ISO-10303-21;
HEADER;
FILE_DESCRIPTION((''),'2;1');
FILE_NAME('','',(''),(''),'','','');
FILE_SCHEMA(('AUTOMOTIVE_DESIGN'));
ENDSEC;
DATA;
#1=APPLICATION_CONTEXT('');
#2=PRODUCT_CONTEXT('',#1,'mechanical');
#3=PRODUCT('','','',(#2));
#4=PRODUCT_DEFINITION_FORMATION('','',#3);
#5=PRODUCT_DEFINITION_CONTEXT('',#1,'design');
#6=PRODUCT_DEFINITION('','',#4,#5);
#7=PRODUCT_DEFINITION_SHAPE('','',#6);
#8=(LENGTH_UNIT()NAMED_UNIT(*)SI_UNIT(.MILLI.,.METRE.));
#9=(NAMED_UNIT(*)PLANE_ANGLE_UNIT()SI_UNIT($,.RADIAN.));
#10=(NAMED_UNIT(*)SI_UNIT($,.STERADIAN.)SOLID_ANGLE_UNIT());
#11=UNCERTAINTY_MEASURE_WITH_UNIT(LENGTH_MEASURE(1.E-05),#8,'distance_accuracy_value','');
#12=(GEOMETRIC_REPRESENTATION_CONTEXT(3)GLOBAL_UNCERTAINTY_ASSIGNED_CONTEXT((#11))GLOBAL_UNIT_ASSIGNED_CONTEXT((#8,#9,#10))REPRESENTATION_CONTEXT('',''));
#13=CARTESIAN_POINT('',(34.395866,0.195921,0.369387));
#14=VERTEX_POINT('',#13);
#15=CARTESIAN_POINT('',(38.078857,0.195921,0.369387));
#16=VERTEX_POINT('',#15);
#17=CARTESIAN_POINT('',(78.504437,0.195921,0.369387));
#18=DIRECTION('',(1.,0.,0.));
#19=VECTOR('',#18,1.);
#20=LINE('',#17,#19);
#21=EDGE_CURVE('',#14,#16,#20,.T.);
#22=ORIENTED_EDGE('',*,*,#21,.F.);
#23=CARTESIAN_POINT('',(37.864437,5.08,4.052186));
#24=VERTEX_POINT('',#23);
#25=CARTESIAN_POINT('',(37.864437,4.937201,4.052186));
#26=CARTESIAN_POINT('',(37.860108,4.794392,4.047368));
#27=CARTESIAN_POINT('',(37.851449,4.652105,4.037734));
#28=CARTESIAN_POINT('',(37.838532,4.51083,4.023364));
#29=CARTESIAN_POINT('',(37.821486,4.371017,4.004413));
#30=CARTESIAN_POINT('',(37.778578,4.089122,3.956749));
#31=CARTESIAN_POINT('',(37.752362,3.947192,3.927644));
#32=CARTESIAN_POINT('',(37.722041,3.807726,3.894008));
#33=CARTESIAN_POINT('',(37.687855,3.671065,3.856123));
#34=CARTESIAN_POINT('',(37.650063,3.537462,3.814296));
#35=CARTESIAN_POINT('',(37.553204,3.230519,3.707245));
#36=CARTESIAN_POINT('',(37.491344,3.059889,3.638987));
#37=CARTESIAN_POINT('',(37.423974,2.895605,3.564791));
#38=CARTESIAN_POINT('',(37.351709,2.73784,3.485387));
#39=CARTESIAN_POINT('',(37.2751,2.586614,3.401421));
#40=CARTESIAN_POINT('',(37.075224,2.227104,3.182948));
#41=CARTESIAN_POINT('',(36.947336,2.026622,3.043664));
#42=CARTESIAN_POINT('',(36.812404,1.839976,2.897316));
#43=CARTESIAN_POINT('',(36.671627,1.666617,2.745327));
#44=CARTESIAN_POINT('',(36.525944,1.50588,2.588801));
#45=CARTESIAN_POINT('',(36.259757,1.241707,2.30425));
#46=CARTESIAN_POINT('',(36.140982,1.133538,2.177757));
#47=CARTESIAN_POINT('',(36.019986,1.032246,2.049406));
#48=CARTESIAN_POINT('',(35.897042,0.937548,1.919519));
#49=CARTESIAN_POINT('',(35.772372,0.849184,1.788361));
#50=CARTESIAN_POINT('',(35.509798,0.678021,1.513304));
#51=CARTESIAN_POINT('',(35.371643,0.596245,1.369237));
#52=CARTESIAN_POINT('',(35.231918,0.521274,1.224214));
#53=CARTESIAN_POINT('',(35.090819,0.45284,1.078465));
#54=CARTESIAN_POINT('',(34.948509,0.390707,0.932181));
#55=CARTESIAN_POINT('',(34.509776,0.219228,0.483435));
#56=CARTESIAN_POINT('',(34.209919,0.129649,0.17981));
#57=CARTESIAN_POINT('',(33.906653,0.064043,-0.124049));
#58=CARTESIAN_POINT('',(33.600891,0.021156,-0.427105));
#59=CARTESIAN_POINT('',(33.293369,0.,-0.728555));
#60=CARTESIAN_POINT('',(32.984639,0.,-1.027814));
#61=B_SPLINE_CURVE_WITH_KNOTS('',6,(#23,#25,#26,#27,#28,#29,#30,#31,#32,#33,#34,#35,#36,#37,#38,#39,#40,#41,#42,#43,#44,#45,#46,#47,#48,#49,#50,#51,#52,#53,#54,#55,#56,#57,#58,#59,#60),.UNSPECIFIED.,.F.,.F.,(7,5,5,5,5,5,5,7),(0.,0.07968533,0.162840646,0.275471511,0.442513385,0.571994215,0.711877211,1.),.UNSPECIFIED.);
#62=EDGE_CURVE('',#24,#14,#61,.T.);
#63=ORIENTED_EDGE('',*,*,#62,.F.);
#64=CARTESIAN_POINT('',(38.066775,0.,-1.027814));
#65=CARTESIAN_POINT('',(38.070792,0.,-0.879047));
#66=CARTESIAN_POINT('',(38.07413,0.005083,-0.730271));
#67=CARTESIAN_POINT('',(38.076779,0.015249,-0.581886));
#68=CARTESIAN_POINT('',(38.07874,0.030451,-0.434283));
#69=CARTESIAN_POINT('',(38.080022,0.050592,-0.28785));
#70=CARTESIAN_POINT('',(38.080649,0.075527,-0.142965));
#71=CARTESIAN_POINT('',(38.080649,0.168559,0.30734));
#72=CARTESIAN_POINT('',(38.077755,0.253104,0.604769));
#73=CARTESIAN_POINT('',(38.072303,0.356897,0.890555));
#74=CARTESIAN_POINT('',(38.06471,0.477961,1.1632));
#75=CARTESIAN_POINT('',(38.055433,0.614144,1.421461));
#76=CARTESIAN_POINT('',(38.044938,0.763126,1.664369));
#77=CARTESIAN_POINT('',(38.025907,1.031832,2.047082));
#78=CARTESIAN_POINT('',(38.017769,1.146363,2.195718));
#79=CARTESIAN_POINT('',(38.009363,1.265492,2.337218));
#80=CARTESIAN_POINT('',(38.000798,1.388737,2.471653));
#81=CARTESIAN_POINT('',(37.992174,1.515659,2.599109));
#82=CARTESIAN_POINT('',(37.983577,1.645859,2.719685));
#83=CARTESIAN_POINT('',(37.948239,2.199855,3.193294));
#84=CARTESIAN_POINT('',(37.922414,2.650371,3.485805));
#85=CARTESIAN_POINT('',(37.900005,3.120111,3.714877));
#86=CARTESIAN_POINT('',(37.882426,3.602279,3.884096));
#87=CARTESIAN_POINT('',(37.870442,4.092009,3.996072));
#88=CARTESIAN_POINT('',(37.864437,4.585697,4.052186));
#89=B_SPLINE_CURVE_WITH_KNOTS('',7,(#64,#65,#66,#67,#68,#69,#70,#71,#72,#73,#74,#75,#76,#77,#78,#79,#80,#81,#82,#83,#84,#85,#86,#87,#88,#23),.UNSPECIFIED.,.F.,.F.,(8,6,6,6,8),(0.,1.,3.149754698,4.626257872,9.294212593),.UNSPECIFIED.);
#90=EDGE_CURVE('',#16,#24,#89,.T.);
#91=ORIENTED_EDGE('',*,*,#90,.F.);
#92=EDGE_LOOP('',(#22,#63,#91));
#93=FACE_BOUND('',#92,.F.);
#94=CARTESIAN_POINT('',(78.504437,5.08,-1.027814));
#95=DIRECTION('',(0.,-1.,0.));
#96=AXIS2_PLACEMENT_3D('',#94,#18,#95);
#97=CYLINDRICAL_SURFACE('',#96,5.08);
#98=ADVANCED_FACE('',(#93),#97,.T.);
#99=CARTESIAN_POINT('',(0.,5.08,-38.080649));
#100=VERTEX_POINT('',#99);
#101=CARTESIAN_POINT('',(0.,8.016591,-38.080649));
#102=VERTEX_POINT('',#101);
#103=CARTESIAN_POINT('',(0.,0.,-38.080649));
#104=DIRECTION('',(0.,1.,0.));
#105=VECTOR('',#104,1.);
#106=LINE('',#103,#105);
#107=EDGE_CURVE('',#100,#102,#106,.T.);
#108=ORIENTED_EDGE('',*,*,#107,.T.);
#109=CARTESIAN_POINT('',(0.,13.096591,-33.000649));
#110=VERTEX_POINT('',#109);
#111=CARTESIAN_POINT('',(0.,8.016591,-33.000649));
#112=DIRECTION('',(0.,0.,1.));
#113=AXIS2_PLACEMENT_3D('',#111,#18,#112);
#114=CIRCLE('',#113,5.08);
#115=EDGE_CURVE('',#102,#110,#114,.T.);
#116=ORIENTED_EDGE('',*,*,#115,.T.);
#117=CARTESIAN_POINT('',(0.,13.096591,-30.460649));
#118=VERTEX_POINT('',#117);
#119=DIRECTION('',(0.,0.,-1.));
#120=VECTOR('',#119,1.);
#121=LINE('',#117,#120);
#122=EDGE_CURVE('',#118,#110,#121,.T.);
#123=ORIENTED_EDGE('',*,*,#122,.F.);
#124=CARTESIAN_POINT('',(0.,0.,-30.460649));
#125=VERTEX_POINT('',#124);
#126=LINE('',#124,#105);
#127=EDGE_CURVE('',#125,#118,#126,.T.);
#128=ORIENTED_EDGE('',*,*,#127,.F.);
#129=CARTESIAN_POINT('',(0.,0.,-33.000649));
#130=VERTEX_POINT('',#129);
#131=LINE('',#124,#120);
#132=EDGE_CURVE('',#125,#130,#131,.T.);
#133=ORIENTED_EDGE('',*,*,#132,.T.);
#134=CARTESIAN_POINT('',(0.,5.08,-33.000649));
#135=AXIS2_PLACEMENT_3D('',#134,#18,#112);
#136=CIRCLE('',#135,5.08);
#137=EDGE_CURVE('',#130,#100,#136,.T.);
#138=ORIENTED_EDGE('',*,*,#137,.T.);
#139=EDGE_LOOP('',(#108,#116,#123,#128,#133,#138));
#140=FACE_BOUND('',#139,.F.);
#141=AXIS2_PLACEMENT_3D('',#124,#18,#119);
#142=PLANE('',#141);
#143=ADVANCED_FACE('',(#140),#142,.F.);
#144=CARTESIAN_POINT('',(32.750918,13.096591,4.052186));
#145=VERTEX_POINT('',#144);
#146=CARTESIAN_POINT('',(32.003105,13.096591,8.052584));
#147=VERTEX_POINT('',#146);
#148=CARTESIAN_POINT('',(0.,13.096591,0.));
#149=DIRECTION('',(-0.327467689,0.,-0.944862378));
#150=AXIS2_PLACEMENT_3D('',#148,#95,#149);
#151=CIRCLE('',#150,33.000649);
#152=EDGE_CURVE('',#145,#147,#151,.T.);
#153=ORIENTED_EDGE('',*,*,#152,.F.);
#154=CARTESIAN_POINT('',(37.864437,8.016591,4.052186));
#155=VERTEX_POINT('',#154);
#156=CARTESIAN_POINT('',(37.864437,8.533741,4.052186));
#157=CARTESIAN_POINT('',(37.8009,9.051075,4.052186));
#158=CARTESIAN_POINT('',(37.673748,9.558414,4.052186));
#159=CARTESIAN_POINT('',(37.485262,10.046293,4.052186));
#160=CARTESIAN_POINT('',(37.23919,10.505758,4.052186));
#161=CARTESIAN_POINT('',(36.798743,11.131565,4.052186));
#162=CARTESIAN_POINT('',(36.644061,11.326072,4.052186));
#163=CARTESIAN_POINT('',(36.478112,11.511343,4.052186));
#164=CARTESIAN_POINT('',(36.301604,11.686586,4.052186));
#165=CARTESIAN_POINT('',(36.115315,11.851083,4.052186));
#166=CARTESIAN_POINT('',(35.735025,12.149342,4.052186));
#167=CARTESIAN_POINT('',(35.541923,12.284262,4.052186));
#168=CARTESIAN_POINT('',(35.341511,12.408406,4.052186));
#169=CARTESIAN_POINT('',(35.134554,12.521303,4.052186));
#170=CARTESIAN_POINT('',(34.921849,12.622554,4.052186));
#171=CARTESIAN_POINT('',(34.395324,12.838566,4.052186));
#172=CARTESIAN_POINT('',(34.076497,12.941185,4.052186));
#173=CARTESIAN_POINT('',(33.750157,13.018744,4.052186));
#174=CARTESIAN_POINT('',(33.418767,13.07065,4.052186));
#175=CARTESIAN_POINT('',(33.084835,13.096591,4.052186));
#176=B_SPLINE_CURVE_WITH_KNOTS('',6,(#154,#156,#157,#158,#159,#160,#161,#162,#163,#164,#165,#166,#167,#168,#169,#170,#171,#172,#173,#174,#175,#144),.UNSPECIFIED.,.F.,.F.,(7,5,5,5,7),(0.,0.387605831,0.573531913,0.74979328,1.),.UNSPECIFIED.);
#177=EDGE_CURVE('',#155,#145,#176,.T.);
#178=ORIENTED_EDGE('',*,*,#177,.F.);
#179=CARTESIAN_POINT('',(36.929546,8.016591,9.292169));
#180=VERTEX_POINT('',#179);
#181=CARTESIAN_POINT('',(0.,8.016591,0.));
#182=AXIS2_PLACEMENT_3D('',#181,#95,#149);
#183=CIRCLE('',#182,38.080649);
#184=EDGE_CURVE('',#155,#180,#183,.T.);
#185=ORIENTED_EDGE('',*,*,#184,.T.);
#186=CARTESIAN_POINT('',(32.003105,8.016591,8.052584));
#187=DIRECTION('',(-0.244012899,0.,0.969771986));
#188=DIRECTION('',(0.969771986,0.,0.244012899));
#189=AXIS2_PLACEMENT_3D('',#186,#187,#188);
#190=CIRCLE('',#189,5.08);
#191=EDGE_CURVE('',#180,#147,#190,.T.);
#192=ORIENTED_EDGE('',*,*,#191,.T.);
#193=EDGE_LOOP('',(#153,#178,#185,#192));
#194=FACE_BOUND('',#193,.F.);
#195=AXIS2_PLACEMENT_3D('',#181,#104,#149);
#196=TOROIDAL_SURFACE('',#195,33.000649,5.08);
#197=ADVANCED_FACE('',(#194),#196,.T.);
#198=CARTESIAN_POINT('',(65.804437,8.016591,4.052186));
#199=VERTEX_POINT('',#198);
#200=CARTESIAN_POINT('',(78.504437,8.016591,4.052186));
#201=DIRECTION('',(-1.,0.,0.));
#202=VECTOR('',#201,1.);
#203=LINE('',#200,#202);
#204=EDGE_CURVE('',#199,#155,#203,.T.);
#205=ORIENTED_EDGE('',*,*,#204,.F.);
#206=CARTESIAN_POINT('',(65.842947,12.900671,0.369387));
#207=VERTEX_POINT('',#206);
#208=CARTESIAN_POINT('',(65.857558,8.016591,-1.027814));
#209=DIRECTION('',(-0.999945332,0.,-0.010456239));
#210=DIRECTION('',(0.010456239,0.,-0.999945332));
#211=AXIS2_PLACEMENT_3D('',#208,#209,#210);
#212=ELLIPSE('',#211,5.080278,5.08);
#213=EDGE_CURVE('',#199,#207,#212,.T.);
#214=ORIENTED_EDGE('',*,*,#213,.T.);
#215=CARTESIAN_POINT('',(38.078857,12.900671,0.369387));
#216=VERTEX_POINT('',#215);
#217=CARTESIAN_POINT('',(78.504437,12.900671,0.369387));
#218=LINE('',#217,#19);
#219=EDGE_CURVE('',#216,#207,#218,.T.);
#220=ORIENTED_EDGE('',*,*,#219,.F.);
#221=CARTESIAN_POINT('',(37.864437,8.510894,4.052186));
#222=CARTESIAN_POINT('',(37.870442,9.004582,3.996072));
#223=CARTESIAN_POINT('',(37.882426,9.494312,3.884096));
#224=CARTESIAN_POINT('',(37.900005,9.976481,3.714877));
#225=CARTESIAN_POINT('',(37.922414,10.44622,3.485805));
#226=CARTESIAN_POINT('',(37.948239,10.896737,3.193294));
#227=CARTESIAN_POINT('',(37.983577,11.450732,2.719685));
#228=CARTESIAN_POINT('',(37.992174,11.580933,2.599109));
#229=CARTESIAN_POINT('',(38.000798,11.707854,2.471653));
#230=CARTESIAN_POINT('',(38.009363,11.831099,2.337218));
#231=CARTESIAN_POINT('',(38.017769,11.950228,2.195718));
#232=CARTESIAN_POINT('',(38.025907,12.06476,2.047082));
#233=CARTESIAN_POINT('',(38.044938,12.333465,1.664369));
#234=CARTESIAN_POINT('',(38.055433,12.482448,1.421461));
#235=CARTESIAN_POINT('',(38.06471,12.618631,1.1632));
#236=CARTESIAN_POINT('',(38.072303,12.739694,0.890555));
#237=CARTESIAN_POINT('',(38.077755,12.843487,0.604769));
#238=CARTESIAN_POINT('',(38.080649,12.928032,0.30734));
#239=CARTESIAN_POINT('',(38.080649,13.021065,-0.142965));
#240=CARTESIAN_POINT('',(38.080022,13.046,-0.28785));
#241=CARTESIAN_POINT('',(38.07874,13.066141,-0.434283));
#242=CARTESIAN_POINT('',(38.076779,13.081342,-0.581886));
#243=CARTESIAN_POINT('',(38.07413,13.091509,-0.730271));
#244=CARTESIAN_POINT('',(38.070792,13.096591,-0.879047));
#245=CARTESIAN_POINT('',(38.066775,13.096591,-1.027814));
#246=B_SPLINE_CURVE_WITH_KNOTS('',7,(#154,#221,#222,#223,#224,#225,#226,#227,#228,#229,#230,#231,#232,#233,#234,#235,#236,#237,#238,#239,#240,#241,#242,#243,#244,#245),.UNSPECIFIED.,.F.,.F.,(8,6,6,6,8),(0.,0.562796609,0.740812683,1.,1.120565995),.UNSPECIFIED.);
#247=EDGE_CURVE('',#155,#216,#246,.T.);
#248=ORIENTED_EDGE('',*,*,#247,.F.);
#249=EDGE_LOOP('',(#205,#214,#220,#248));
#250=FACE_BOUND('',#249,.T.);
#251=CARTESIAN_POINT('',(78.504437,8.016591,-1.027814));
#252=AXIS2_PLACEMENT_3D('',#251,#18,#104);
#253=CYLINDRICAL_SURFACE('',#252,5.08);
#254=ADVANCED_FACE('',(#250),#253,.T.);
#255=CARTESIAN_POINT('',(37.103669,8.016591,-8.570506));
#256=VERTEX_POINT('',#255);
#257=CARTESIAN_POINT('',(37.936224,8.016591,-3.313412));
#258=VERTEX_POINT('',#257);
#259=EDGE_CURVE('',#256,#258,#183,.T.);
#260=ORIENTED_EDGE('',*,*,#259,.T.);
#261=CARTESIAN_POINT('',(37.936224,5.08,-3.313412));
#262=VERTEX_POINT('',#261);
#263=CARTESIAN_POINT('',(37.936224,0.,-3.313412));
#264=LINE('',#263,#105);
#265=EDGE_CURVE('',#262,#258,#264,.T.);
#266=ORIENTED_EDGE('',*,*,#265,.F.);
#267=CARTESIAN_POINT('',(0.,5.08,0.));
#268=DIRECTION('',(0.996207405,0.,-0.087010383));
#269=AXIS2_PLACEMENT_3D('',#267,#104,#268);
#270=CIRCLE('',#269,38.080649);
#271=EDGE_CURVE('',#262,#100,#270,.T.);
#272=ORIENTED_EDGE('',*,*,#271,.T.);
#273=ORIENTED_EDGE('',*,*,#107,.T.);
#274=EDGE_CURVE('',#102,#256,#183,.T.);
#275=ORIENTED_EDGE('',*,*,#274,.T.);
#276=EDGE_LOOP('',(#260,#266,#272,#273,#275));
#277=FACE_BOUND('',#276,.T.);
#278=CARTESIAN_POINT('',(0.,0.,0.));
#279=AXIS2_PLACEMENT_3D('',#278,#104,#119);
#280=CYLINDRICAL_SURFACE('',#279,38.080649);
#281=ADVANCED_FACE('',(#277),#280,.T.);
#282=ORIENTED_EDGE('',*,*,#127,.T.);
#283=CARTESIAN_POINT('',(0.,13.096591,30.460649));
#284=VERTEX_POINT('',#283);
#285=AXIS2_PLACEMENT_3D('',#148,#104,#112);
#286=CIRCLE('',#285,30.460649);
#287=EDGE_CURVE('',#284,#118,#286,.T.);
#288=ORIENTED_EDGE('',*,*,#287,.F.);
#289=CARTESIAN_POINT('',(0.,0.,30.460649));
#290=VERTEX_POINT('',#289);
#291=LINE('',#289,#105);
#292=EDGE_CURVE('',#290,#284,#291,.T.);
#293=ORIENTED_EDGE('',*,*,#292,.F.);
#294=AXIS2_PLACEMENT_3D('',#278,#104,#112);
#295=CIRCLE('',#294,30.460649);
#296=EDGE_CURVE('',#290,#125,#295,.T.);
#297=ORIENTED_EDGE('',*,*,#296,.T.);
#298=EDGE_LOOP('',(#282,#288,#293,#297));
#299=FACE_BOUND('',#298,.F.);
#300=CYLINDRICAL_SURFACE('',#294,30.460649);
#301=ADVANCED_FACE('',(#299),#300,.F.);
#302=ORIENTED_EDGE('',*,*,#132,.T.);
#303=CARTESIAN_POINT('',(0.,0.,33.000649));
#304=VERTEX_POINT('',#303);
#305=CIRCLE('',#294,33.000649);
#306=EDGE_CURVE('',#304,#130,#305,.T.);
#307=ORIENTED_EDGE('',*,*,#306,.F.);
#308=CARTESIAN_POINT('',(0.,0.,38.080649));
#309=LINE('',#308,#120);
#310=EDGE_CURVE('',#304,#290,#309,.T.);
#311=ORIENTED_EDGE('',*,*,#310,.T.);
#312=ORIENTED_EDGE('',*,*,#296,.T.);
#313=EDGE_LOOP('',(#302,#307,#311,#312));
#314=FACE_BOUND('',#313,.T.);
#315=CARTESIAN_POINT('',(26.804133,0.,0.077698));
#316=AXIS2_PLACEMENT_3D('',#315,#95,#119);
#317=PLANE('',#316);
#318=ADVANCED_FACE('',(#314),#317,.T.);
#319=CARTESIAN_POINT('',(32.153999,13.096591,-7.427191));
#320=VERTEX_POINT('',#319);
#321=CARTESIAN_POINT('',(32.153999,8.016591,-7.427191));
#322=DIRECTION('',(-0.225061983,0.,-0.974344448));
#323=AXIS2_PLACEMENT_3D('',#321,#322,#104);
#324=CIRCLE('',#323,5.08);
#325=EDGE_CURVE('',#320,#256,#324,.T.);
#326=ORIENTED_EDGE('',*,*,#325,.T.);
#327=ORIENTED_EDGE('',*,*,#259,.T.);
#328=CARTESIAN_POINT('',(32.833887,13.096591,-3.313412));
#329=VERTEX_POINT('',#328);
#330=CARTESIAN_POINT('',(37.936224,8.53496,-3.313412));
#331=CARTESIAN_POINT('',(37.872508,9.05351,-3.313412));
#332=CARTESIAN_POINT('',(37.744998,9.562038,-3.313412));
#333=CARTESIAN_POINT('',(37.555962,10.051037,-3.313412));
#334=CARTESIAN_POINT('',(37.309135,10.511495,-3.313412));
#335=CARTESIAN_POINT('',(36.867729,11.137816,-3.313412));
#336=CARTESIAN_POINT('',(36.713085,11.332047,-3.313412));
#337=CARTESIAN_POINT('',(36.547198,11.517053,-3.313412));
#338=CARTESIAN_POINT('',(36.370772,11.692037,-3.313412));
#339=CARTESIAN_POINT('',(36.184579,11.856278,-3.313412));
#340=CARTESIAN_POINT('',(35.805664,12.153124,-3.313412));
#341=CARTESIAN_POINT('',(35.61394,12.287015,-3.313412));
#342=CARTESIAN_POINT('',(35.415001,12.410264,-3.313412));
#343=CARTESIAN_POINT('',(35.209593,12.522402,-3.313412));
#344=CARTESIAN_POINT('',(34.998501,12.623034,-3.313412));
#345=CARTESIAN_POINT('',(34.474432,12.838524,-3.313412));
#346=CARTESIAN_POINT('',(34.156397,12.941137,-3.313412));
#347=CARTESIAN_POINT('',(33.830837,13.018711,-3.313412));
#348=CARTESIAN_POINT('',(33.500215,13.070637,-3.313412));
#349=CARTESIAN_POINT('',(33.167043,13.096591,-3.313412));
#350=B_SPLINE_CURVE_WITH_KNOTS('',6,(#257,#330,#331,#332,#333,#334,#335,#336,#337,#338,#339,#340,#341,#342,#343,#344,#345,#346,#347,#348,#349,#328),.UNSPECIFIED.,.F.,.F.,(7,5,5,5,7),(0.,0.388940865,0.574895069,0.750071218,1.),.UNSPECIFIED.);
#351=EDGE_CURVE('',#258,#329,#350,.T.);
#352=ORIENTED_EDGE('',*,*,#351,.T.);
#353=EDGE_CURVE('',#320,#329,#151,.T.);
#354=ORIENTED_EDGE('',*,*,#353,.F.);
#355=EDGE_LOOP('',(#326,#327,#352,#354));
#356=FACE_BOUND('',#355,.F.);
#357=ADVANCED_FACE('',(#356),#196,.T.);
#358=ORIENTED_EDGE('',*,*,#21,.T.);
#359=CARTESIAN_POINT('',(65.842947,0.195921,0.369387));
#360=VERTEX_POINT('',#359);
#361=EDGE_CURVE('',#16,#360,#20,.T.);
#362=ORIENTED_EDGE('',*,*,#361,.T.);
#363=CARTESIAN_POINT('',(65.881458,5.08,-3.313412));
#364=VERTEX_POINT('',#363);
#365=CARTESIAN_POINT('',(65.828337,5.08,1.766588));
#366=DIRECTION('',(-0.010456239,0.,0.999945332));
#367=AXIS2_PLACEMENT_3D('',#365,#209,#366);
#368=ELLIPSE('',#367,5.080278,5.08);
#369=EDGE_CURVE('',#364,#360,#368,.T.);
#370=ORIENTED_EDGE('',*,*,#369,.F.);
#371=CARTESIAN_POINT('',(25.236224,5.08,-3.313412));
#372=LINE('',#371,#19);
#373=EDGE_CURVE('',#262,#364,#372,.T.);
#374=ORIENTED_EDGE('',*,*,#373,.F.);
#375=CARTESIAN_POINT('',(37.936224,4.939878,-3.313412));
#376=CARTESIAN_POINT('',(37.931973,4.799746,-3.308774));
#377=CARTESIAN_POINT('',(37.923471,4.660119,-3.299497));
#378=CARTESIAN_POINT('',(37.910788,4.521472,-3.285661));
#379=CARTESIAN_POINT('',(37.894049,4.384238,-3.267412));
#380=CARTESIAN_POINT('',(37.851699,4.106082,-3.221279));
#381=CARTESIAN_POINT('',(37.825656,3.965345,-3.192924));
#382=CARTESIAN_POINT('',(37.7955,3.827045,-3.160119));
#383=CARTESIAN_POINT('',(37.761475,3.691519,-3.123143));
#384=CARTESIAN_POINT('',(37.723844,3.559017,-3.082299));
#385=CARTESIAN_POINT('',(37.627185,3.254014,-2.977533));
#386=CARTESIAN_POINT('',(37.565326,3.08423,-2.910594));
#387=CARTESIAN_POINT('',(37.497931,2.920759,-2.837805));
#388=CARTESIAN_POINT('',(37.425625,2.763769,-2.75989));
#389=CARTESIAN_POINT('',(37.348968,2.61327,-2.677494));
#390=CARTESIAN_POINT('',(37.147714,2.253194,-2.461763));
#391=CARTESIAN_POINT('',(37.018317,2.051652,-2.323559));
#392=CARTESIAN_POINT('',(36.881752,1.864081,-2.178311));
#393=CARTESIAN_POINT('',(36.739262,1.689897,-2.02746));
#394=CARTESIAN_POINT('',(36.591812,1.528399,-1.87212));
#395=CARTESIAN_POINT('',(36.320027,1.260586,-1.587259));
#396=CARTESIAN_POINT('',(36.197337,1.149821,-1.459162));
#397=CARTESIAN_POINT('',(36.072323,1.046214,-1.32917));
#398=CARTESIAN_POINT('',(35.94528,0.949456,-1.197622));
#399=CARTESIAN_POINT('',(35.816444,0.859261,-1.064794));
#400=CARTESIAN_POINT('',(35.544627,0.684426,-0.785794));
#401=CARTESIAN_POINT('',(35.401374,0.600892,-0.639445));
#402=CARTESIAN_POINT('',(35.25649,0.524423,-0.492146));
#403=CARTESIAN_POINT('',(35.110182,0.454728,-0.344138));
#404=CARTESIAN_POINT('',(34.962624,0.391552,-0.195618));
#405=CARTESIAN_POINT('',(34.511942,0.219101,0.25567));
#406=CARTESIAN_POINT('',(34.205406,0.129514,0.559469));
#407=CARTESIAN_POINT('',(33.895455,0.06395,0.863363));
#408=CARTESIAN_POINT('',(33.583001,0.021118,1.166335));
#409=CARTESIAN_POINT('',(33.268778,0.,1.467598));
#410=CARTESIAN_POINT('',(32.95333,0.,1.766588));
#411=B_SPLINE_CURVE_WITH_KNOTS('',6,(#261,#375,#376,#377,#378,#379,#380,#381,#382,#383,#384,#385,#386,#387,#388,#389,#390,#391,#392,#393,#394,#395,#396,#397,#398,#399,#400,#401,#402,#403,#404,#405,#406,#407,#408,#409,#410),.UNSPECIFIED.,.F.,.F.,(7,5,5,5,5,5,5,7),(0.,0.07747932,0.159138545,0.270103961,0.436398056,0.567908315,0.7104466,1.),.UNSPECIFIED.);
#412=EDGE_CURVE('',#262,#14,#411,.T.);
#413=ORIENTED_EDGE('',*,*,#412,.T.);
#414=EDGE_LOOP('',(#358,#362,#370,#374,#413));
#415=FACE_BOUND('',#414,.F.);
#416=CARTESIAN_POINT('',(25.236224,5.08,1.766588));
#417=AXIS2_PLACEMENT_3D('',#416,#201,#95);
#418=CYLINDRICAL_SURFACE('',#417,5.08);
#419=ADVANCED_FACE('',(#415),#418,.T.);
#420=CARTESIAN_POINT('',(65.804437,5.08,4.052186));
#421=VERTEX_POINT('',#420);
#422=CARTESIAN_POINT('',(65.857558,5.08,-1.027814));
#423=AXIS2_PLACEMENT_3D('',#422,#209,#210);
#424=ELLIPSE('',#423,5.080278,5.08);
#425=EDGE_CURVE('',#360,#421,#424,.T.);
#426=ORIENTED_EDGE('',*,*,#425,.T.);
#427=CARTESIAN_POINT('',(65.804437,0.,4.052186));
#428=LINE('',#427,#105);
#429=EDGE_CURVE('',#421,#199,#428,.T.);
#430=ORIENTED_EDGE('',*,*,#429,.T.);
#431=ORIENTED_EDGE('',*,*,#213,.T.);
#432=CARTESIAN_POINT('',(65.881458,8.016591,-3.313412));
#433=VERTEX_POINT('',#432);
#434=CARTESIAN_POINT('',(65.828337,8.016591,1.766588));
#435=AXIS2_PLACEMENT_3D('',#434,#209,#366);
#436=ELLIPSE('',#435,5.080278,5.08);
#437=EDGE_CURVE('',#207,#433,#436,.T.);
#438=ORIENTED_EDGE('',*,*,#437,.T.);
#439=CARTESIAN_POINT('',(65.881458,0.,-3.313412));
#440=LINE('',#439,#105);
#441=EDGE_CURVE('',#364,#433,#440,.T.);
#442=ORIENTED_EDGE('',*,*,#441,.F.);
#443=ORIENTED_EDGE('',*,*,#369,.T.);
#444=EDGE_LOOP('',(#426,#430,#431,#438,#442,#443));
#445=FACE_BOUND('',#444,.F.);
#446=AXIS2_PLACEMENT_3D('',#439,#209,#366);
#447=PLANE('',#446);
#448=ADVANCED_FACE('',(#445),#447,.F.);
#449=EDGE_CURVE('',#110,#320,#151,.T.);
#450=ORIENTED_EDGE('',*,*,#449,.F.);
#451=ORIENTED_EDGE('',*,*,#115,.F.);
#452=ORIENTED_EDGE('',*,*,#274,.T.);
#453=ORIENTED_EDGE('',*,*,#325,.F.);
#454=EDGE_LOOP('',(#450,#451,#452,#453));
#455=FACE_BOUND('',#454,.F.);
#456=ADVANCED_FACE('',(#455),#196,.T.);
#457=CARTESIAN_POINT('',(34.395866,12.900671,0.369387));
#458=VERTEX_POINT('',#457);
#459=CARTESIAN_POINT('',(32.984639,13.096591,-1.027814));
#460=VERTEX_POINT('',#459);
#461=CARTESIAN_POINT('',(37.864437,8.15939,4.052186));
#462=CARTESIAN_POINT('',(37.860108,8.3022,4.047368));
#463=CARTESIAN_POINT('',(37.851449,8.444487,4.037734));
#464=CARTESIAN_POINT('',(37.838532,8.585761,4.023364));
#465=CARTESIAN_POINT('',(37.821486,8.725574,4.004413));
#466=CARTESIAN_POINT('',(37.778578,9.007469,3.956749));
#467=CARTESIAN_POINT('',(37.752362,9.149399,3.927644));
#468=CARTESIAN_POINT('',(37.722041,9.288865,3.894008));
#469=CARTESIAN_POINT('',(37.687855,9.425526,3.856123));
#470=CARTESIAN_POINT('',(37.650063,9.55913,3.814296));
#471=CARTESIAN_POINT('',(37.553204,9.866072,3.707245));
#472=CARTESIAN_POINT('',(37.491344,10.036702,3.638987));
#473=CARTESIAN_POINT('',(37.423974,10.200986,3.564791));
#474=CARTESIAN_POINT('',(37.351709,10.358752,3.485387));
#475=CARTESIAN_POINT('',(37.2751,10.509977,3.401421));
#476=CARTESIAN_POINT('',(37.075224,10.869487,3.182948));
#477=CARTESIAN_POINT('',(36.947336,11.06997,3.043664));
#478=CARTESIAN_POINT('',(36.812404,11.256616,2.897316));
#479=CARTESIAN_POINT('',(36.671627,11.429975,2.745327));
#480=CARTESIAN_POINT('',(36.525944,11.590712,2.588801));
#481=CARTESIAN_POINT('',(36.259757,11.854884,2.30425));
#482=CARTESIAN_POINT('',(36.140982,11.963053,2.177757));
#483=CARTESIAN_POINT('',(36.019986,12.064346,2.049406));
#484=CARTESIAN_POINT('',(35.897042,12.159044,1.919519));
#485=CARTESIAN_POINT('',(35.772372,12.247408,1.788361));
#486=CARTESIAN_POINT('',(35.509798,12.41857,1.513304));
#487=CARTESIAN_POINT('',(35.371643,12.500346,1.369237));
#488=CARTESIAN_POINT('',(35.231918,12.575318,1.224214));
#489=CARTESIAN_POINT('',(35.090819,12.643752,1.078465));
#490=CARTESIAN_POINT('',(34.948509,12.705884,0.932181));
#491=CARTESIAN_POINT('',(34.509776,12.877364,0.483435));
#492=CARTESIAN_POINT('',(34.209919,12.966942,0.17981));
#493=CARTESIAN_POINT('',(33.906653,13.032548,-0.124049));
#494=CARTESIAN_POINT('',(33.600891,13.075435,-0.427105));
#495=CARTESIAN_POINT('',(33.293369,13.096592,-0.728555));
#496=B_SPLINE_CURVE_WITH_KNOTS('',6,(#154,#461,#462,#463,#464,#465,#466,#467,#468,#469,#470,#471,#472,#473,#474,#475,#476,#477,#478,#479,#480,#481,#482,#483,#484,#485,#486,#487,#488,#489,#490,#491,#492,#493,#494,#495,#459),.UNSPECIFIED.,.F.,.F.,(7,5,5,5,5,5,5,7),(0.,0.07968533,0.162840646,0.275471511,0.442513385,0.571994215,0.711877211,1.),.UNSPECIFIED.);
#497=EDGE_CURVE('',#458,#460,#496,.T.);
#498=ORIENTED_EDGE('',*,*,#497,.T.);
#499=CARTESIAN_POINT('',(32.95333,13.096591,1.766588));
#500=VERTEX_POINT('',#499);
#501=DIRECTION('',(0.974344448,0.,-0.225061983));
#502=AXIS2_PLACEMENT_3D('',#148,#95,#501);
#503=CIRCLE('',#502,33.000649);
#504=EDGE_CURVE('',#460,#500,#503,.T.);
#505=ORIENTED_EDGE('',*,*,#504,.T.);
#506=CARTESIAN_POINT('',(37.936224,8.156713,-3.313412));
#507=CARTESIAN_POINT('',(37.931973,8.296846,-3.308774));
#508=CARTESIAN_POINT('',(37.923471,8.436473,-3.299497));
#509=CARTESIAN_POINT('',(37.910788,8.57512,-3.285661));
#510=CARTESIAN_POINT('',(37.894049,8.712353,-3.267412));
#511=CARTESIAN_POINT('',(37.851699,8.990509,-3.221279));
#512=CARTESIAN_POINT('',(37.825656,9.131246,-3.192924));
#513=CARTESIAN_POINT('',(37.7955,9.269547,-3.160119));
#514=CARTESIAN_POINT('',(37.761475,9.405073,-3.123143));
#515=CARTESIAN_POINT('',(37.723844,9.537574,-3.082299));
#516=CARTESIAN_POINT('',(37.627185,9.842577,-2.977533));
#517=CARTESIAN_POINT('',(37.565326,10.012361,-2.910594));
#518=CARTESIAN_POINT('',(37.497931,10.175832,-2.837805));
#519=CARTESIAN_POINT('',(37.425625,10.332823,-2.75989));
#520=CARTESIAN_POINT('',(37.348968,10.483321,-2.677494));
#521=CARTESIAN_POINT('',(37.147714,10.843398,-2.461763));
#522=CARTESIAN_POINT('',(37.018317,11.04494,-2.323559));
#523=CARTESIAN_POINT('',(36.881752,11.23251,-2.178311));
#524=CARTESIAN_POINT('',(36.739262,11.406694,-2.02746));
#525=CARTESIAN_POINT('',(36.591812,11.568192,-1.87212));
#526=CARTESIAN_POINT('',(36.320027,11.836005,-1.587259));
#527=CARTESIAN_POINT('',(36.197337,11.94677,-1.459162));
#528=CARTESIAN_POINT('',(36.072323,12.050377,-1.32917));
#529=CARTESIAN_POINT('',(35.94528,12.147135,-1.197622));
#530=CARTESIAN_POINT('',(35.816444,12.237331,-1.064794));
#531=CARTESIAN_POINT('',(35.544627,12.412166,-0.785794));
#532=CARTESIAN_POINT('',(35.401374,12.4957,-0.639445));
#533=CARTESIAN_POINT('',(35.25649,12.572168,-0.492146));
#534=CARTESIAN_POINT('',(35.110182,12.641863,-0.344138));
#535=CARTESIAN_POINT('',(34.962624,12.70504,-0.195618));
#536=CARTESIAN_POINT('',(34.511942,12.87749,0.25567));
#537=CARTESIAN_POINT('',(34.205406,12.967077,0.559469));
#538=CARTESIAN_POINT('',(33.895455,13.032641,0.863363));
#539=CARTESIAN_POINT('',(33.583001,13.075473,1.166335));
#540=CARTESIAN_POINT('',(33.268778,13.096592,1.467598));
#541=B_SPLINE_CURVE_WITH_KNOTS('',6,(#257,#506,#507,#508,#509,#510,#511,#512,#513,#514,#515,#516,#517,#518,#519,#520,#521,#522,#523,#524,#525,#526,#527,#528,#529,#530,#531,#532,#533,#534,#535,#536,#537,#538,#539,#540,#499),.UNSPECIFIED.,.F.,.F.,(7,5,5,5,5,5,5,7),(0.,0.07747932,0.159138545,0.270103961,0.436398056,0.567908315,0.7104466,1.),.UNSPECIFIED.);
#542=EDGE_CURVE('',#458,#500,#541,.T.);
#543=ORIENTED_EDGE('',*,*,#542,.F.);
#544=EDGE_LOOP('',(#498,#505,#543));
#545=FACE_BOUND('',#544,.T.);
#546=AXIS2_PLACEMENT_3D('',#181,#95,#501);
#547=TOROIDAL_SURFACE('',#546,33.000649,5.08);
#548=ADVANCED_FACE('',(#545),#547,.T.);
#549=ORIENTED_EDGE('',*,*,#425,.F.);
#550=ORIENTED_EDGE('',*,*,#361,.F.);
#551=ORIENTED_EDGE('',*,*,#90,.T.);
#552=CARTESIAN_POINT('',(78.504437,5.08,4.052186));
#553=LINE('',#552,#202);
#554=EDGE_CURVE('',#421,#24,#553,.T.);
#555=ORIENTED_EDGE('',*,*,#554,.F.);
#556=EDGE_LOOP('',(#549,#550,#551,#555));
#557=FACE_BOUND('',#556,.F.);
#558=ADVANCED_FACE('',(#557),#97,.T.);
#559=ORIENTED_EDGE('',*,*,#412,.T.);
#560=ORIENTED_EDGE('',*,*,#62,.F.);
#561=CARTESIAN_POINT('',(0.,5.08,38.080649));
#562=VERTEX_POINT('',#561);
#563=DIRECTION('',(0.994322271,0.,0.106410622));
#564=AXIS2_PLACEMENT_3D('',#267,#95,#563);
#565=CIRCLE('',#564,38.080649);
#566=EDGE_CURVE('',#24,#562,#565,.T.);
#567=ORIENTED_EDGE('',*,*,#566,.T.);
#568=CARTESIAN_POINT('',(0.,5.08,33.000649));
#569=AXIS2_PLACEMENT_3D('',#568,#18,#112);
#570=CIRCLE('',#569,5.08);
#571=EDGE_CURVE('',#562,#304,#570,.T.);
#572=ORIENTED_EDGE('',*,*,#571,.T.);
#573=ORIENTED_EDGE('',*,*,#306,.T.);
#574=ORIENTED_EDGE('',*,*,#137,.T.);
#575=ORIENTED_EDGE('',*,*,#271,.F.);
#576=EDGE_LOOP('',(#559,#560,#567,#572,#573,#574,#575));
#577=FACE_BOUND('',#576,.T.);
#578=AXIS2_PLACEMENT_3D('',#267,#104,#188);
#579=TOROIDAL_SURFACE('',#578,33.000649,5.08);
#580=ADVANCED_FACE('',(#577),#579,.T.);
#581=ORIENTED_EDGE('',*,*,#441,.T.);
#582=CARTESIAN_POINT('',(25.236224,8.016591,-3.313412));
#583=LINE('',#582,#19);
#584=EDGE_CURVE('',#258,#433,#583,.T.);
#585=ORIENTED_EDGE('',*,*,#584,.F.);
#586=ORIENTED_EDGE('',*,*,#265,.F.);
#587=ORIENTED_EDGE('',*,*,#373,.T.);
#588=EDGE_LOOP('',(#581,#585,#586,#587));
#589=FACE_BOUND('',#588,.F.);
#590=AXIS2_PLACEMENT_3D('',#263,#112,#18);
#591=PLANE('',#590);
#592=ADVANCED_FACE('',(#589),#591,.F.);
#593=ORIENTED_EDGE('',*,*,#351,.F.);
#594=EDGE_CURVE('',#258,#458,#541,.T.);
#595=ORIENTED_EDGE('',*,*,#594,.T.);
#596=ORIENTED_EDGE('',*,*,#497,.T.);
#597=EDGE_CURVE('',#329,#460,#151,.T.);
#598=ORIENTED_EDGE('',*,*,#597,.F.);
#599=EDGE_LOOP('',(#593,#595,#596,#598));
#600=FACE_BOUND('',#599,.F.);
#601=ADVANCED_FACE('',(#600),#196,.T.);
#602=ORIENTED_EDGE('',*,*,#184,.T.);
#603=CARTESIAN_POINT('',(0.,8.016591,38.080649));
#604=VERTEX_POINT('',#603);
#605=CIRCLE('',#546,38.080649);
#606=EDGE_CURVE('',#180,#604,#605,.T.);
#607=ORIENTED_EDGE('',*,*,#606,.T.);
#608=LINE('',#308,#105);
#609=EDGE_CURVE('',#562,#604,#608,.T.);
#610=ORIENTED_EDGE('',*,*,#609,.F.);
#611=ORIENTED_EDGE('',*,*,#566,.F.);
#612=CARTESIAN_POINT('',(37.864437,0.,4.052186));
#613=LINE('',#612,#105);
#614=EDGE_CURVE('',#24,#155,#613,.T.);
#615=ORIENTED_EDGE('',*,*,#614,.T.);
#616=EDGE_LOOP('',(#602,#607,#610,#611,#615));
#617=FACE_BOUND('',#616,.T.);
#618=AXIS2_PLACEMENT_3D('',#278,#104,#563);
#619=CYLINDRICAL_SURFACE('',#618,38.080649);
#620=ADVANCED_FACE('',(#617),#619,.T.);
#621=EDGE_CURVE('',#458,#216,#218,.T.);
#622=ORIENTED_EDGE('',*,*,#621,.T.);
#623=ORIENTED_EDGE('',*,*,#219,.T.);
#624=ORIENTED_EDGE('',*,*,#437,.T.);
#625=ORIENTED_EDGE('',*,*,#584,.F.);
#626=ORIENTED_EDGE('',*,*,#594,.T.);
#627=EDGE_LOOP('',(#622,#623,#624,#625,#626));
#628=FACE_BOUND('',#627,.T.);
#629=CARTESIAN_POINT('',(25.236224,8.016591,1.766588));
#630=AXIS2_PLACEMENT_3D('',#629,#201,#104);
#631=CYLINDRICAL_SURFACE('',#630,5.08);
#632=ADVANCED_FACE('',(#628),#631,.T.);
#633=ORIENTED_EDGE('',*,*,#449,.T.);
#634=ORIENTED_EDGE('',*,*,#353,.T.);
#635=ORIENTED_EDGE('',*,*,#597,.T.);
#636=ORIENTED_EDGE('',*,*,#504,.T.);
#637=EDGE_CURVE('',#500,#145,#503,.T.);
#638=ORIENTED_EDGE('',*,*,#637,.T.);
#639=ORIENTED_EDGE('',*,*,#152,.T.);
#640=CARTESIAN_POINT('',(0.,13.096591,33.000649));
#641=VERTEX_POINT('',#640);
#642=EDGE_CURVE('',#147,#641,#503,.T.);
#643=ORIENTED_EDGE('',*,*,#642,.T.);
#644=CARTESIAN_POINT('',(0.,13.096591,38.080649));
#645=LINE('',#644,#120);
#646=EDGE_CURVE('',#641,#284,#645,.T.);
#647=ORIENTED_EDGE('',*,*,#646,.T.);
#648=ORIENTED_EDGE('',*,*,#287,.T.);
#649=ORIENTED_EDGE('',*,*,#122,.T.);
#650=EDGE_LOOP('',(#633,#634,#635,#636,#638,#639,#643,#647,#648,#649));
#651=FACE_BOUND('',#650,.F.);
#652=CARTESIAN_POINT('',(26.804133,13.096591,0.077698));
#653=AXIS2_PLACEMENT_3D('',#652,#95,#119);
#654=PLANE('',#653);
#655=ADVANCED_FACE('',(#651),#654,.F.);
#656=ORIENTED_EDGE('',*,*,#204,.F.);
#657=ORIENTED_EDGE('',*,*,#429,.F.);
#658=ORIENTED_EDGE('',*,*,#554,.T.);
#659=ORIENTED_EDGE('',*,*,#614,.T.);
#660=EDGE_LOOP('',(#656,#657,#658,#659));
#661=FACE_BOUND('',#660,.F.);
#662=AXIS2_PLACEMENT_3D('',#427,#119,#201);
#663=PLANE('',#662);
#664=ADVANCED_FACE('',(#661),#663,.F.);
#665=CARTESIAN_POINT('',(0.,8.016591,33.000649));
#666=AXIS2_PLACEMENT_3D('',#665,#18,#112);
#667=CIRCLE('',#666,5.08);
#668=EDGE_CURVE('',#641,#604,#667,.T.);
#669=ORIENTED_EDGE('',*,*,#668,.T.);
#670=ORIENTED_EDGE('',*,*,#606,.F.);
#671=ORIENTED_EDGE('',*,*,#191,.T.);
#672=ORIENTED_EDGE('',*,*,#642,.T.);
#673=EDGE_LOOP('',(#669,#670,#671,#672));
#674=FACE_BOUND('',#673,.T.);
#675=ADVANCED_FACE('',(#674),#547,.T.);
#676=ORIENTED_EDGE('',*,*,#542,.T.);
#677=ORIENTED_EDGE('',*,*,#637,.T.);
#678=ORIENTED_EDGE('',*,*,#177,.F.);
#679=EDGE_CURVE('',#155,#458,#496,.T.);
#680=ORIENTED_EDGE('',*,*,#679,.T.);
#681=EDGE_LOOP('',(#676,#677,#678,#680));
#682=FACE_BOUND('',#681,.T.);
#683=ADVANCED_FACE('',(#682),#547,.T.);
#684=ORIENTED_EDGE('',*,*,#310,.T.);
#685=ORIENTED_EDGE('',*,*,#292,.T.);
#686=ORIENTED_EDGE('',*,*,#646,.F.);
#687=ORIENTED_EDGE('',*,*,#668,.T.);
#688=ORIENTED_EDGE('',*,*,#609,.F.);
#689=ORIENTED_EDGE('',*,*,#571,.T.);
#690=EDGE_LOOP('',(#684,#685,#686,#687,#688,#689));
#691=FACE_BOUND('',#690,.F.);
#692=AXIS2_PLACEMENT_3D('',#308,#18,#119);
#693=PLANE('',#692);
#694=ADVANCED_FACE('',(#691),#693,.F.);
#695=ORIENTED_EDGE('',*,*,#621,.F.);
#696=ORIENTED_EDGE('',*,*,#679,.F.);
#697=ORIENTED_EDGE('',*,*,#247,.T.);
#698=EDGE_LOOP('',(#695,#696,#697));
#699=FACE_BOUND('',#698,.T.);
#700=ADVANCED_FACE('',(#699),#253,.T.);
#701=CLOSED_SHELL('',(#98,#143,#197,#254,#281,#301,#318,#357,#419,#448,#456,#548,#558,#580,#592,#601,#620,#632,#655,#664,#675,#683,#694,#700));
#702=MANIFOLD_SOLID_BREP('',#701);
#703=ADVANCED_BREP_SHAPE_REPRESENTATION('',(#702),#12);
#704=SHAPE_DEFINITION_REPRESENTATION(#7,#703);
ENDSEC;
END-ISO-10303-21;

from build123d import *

# Parameters (mm, degrees)
F3_T3_DEPTH  = 53.34
F3_S4_R      = 38.080648574
F3_T5_DEPTH  = 28
F3_T8_ANGLE  = 123.2386530656
F3_T12_ANGLE = 123.2386530656
F3_T16_ANGLE = 122.1214906001
F3_T20_ANGLE = 122.1214906001
F3_T24_DEPTH = 53.34
F3_S25_R     = 38.080648574
F3_T26_DEPTH = 28
F3_T29_ANGLE = 123.2386530656
F3_T33_ANGLE = 123.2386530656
F3_T37_ANGLE = 122.1214906001
F3_T41_ANGLE = 122.1214906001
F3_T45_DEPTH = 53.3452335571
F3_S46_R     = 38.080648574
F3_T47_DEPTH = 28
F3_T50_DEPTH = 53.3452335571
F3_S51_R     = 38.080648574
F3_T52_DEPTH = 28
F3_T56_DEPTH = 53.34
F3_S57_R     = 38.080648574
F3_T58_DEPTH = 28
F3_T61_ANGLE = 122.1214906001
F3_T68_ANGLE = 123.2386530656
F3_T73_DEPTH = 53.3452335571
F3_S74_R     = 38.080648574
F3_T75_DEPTH = 28
F3_T80_DEPTH = 53.34
F3_S81_R     = 38.080648574
F3_T82_DEPTH = 28
F3_T85_ANGLE = 122.1214906001
F3_T92_ANGLE = 123.2386530656
F3_T97_DEPTH = 53.3452335571
F3_S98_R     = 38.080648574
F3_T99_DEPTH = 28


# Not quite as in the source:
# - a fillet or chamfer that OpenCascade refuses, or shapes differently, is made with other operations: its cross-section is extruded or revolved along the edge and cut away or added


with BuildPart() as f2:
    # F2: sweep along a path in F1
    with BuildLine(Plane.YZ) as f2_path:
        Line((0, 0), (13.0965914577, 0))
    # F0 (on Front) → F2 (sweep)
    with BuildSketch(Plane.XZ):
        with BuildLine():
            ThreePointArc((37.8644369888, 4.0521855022), (38.0788400668, 0.3711266463), (37.9362240869, -3.3134118136))
            Line((37.9362240869, -3.3134118136), (65.8814576441, -3.3134118136))
            Line((65.8814576441, -3.3134118136), (65.8044369888, 4.0521855022))
            Line((65.8044369888, 4.0521855022), (37.8644369888, 4.0521855022))
        make_face()
        with BuildLine():
            Line((0, -30.460648574), (0, -38.080648574))
            ThreePointArc((0, -38.080648574), (25.7289615508, -28.0741221294), (37.9362240869, -3.3134118136))
            ThreePointArc((37.9362240869, -3.3134118136), (38.0788400668, 0.3711266463), (37.8644369888, 4.0521855022))
            ThreePointArc((37.8644369888, 4.0521855022), (25.4541346716, 28.3235383373), (0, 38.080648574))
            Line((0, 38.080648574), (0, 30.460648574))
            ThreePointArc((0, 30.460648574), (30.460648574, 0), (0, -30.460648574))
        make_face()
    sweep(path=f2_path.line)

    # F3: fillet of radius 5.08 on 8 edges, made by hand


with BuildPart() as f3_tool1:
    # F3_s2 → F3_t3 (new body)
    with BuildSketch(Plane.YZ.offset(78.5044369888)):
        with BuildLine():
            ThreePointArc((0, -1.0278144978), (1.4878975516, 2.5642879506), (5.08, 4.0521855022))
            Line((5.08, 4.0521855022), (0, 4.0521855022))
            Line((0, 4.0521855022), (0, -1.0278144978))
        make_face()
    extrude(amount=-F3_T3_DEPTH)

    # F3_s4 → F3_t5 (cut, symmetric)
    with BuildSketch(Plane.XZ.offset(-2.5)):
        Circle(F3_S4_R)
    extrude(amount=F3_T5_DEPTH, both=True, mode=Mode.SUBTRACT)


with BuildPart() as f3_tool6:
    # F3_s7 → F3_t8 (revolve)
    with BuildSketch(Plane(origin=(0, 0, 0), x_dir=(0, 1, 0), z_dir=(-0.2440128994, 0, 0.969771986))):
        with BuildLine():
            ThreePointArc((0, -33.000648574), (1.4878975516, -36.5927510225), (5.08, -38.080648574))
            Line((5.08, -38.080648574), (0, -38.080648574))
            Line((0, -38.080648574), (0, -33.000648574))
        make_face()
    revolve(axis=Axis((0, 0, 0), (0, 1, 0)), revolution_arc=F3_T8_ANGLE)

    split(bisect_by=Plane.XY.offset(4.0521855022), keep=Keep.TOP)


with BuildPart() as f3_tool10:
    # F3_s11 → F3_t12 (revolve)
    with BuildSketch(Plane(origin=(0, 0, 0), x_dir=(0, 1, 0), z_dir=(-0.2440128994, 0, 0.969771986))):
        with BuildLine():
            ThreePointArc((0, -33.000648574), (1.4878975516, -36.5927510225), (5.08, -38.080648574))
            Line((5.08, -38.080648574), (0, -38.080648574))
            Line((0, -38.080648574), (0, -33.000648574))
        make_face()
    revolve(axis=Axis((0, 0, 0), (0, 1, 0)), revolution_arc=F3_T12_ANGLE)

    split(bisect_by=Plane.XY.offset(-3.3134118136), keep=Keep.BOTTOM)


with BuildPart() as f3_tool14:
    # F3_s15 → F3_t16 (revolve)
    with BuildSketch(Plane(origin=(0, 0, 0), x_dir=(0, 1, 0), z_dir=(-0.9448633995, 0, -0.3274647406))):
        with BuildLine():
            ThreePointArc((0, -33.000648574), (1.4878975516, -36.5927510225), (5.08, -38.080648574))
            Line((5.08, -38.080648574), (0, -38.080648574))
            Line((0, -38.080648574), (0, -33.000648574))
        make_face()
    revolve(axis=Axis((0, 0, 0), (0, 1, 0)), revolution_arc=F3_T16_ANGLE)

    split(bisect_by=Plane.XY.offset(4.0521855022), keep=Keep.TOP)


with BuildPart() as f3_tool18:
    # F3_s19 → F3_t20 (revolve)
    with BuildSketch(Plane(origin=(0, 0, 0), x_dir=(0, 1, 0), z_dir=(-0.9448633995, 0, -0.3274647406))):
        with BuildLine():
            ThreePointArc((0, -33.000648574), (1.4878975516, -36.5927510225), (5.08, -38.080648574))
            Line((5.08, -38.080648574), (0, -38.080648574))
            Line((0, -38.080648574), (0, -33.000648574))
        make_face()
    revolve(axis=Axis((0, 0, 0), (0, 1, 0)), revolution_arc=F3_T20_ANGLE)

    split(bisect_by=Plane.XY.offset(-3.3134118136), keep=Keep.BOTTOM)


with BuildPart() as f3_tool22:
    # F3_s23 → F3_t24 (new body)
    with BuildSketch(Plane.YZ.offset(78.5044369888)):
        with BuildLine():
            ThreePointArc((13.0965914577, -1.0278144978), (11.6086939062, 2.5642879506), (8.0165914577, 4.0521855022))
            Line((8.0165914577, 4.0521855022), (13.0965914577, 4.0521855022))
            Line((13.0965914577, 4.0521855022), (13.0965914577, -1.0278144978))
        make_face()
    extrude(amount=-F3_T24_DEPTH)

    # F3_s25 → F3_t26 (cut, symmetric)
    with BuildSketch(Plane.XZ.offset(-10.6)):
        Circle(F3_S25_R)
    extrude(amount=F3_T26_DEPTH, both=True, mode=Mode.SUBTRACT)


with BuildPart() as f3_tool27:
    # F3_s28 → F3_t29 (revolve)
    with BuildSketch(Plane(origin=(0, 0, 0), x_dir=(0, 1, 0), z_dir=(-0.9448623776, 0, 0.3274676891))):
        with BuildLine():
            ThreePointArc((8.0165914577, 38.080648574), (11.6086939062, 36.5927510225), (13.0965914577, 33.000648574))
            Line((13.0965914577, 33.000648574), (13.0965914577, 38.080648574))
            Line((13.0965914577, 38.080648574), (8.0165914577, 38.080648574))
        make_face()
    revolve(axis=Axis((0, 13.0965914577, 0), (0, -1, 0)), revolution_arc=F3_T29_ANGLE)

    split(bisect_by=Plane.XY.offset(-3.3134118136), keep=Keep.BOTTOM)


with BuildPart() as f3_tool31:
    # F3_s32 → F3_t33 (revolve)
    with BuildSketch(Plane(origin=(0, 0, 0), x_dir=(0, 1, 0), z_dir=(-0.9448623776, 0, 0.3274676891))):
        with BuildLine():
            ThreePointArc((8.0165914577, 38.080648574), (11.6086939062, 36.5927510225), (13.0965914577, 33.000648574))
            Line((13.0965914577, 33.000648574), (13.0965914577, 38.080648574))
            Line((13.0965914577, 38.080648574), (8.0165914577, 38.080648574))
        make_face()
    revolve(axis=Axis((0, 13.0965914577, 0), (0, -1, 0)), revolution_arc=F3_T33_ANGLE)

    split(bisect_by=Plane.XY.offset(4.0521855022), keep=Keep.TOP)


with BuildPart() as f3_tool35:
    # F3_s36 → F3_t37 (revolve)
    with BuildSketch(Plane(origin=(0, 0, 0), x_dir=(0, 1, 0), z_dir=(-0.2250619827, 0, -0.9743444483))):
        with BuildLine():
            ThreePointArc((13.0965914577, 33.000648574), (11.6086939062, 36.5927510225), (8.0165914577, 38.080648574))
            Line((8.0165914577, 38.080648574), (13.0965914577, 38.080648574))
            Line((13.0965914577, 38.080648574), (13.0965914577, 33.000648574))
        make_face()
    revolve(axis=Axis((0, 13.0965914577, 0), (0, -1, 0)), revolution_arc=F3_T37_ANGLE)

    split(bisect_by=Plane.XY.offset(-3.3134118136), keep=Keep.BOTTOM)


with BuildPart() as f3_tool39:
    # F3_s40 → F3_t41 (revolve)
    with BuildSketch(Plane(origin=(0, 0, 0), x_dir=(0, 1, 0), z_dir=(-0.2250619827, 0, -0.9743444483))):
        with BuildLine():
            ThreePointArc((13.0965914577, 33.000648574), (11.6086939062, 36.5927510225), (8.0165914577, 38.080648574))
            Line((8.0165914577, 38.080648574), (13.0965914577, 38.080648574))
            Line((13.0965914577, 38.080648574), (13.0965914577, 33.000648574))
        make_face()
    revolve(axis=Axis((0, 13.0965914577, 0), (0, -1, 0)), revolution_arc=F3_T41_ANGLE)

    split(bisect_by=Plane.XY.offset(4.0521855022), keep=Keep.TOP)


with BuildPart() as f3_tool43:
    # F3_s44 → F3_t45 (new body)
    with BuildSketch(Plane.YZ.offset(25.2362240869)):
        with BuildLine():
            ThreePointArc((13.0965914577, 1.7665881864), (11.6086939062, -1.8255142621), (8.0165914577, -3.3134118136))
            Line((8.0165914577, -3.3134118136), (13.0965914577, -3.3134118136))
            Line((13.0965914577, -3.3134118136), (13.0965914577, 1.7665881864))
        make_face()
    extrude(amount=F3_T45_DEPTH)

    # F3_s46 → F3_t47 (cut, symmetric)
    with BuildSketch(Plane.XZ.offset(-10.6)):
        Circle(F3_S46_R)
    extrude(amount=F3_T47_DEPTH, both=True, mode=Mode.SUBTRACT)


with BuildPart() as f3_tool48:
    # F3_s49 → F3_t50 (new body)
    with BuildSketch(Plane.YZ.offset(25.2362240869)):
        with BuildLine():
            ThreePointArc((0, 1.7665881864), (1.4878975516, -1.8255142621), (5.08, -3.3134118136))
            Line((5.08, -3.3134118136), (0, -3.3134118136))
            Line((0, -3.3134118136), (0, 1.7665881864))
        make_face()
    extrude(amount=F3_T50_DEPTH)

    # F3_s51 → F3_t52 (cut, symmetric)
    with BuildSketch(Plane.XZ.offset(-2.5)):
        Circle(F3_S51_R)
    extrude(amount=F3_T52_DEPTH, both=True, mode=Mode.SUBTRACT)


with BuildPart() as f3_tool54:
    # F3_s55 → F3_t56 (new body)
    with BuildSketch(Plane.YZ.offset(78.5044369888)):
        with BuildLine():
            ThreePointArc((0, -1.0278144978), (1.4878975516, 2.5642879506), (5.08, 4.0521855022))
            Line((5.08, 4.0521855022), (0, 4.0521855022))
            Line((0, 4.0521855022), (0, -1.0278144978))
        make_face()
    extrude(amount=-F3_T56_DEPTH)

    # F3_s57 → F3_t58 (intersect, symmetric)
    with BuildSketch(Plane.XZ.offset(-2.5)):
        Circle(F3_S57_R)
    extrude(amount=F3_T58_DEPTH, both=True, mode=Mode.INTERSECT)


with BuildPart() as f3_tool59:
    # F3_s60 → F3_t61 (revolve)
    with BuildSketch(Plane(origin=(0, 0, 0), x_dir=(0, 1, 0), z_dir=(-0.9448633995, 0, -0.3274647406))):
        with BuildLine():
            ThreePointArc((0, -33.000648574), (1.4878975516, -36.5927510225), (5.08, -38.080648574))
            Line((5.08, -38.080648574), (0, -38.080648574))
            Line((0, -38.080648574), (0, -33.000648574))
        make_face()
    revolve(axis=Axis((0, 0, 0), (0, 1, 0)), revolution_arc=F3_T61_ANGLE)

    split(bisect_by=Plane.XY.offset(-3.3134118136), keep=Keep.TOP)

    split(bisect_by=Plane.XY.offset(4.0521855022), keep=Keep.BOTTOM)


with BuildPart() as f3_tool54_1:
    add(f3_tool54.part)

    # F3_t64: intersect F3_tool59
    add(f3_tool59.part, mode=Mode.INTERSECT)


with BuildPart() as f3_tool66:
    # F3_s67 → F3_t68 (revolve)
    with BuildSketch(Plane(origin=(0, 0, 0), x_dir=(0, 1, 0), z_dir=(-0.2440128994, 0, 0.969771986))):
        with BuildLine():
            ThreePointArc((0, -33.000648574), (1.4878975516, -36.5927510225), (5.08, -38.080648574))
            Line((5.08, -38.080648574), (0, -38.080648574))
            Line((0, -38.080648574), (0, -33.000648574))
        make_face()
    revolve(axis=Axis((0, 0, 0), (0, 1, 0)), revolution_arc=F3_T68_ANGLE)

    split(bisect_by=Plane.XY.offset(-3.3134118136), keep=Keep.TOP)

    split(bisect_by=Plane.XY.offset(4.0521855022), keep=Keep.BOTTOM)


with BuildPart() as f3_tool71:
    # F3_s72 → F3_t73 (new body)
    with BuildSketch(Plane.YZ.offset(25.2362240869)):
        with BuildLine():
            ThreePointArc((0, 1.7665881864), (1.4878975516, -1.8255142621), (5.08, -3.3134118136))
            Line((5.08, -3.3134118136), (0, -3.3134118136))
            Line((0, -3.3134118136), (0, 1.7665881864))
        make_face()
    extrude(amount=F3_T73_DEPTH)

    # F3_s74 → F3_t75 (intersect, symmetric)
    with BuildSketch(Plane.XZ.offset(-2.5)):
        Circle(F3_S74_R)
    extrude(amount=F3_T75_DEPTH, both=True, mode=Mode.INTERSECT)


with BuildPart() as f3_tool66_1:
    add(f3_tool66.part)

    # F3_t76: intersect F3_tool71
    add(f3_tool71.part, mode=Mode.INTERSECT)


with BuildPart() as f3_tool78:
    # F3_s79 → F3_t80 (new body)
    with BuildSketch(Plane.YZ.offset(78.5044369888)):
        with BuildLine():
            ThreePointArc((13.0965914577, -1.0278144978), (11.6086939062, 2.5642879506), (8.0165914577, 4.0521855022))
            Line((8.0165914577, 4.0521855022), (13.0965914577, 4.0521855022))
            Line((13.0965914577, 4.0521855022), (13.0965914577, -1.0278144978))
        make_face()
    extrude(amount=-F3_T80_DEPTH)

    # F3_s81 → F3_t82 (intersect, symmetric)
    with BuildSketch(Plane.XZ.offset(-10.6)):
        Circle(F3_S81_R)
    extrude(amount=F3_T82_DEPTH, both=True, mode=Mode.INTERSECT)


with BuildPart() as f3_tool83:
    # F3_s84 → F3_t85 (revolve)
    with BuildSketch(Plane(origin=(0, 0, 0), x_dir=(0, 1, 0), z_dir=(-0.2250619827, 0, -0.9743444483))):
        with BuildLine():
            ThreePointArc((13.0965914577, 33.000648574), (11.6086939062, 36.5927510225), (8.0165914577, 38.080648574))
            Line((8.0165914577, 38.080648574), (13.0965914577, 38.080648574))
            Line((13.0965914577, 38.080648574), (13.0965914577, 33.000648574))
        make_face()
    revolve(axis=Axis((0, 13.0965914577, 0), (0, -1, 0)), revolution_arc=F3_T85_ANGLE)

    split(bisect_by=Plane.XY.offset(-3.3134118136), keep=Keep.TOP)

    split(bisect_by=Plane.XY.offset(4.0521855022), keep=Keep.BOTTOM)


with BuildPart() as f3_tool78_1:
    add(f3_tool78.part)

    # F3_t88: intersect F3_tool83
    add(f3_tool83.part, mode=Mode.INTERSECT)


with BuildPart() as f3_tool90:
    # F3_s91 → F3_t92 (revolve)
    with BuildSketch(Plane(origin=(0, 0, 0), x_dir=(0, 1, 0), z_dir=(-0.9448623776, 0, 0.3274676891))):
        with BuildLine():
            ThreePointArc((8.0165914577, 38.080648574), (11.6086939062, 36.5927510225), (13.0965914577, 33.000648574))
            Line((13.0965914577, 33.000648574), (13.0965914577, 38.080648574))
            Line((13.0965914577, 38.080648574), (8.0165914577, 38.080648574))
        make_face()
    revolve(axis=Axis((0, 13.0965914577, 0), (0, -1, 0)), revolution_arc=F3_T92_ANGLE)

    split(bisect_by=Plane.XY.offset(-3.3134118136), keep=Keep.TOP)

    split(bisect_by=Plane.XY.offset(4.0521855022), keep=Keep.BOTTOM)


with BuildPart() as f3_tool95:
    # F3_s96 → F3_t97 (new body)
    with BuildSketch(Plane.YZ.offset(25.2362240869)):
        with BuildLine():
            ThreePointArc((13.0965914577, 1.7665881864), (11.6086939062, -1.8255142621), (8.0165914577, -3.3134118136))
            Line((8.0165914577, -3.3134118136), (13.0965914577, -3.3134118136))
            Line((13.0965914577, -3.3134118136), (13.0965914577, 1.7665881864))
        make_face()
    extrude(amount=F3_T97_DEPTH)

    # F3_s98 → F3_t99 (intersect, symmetric)
    with BuildSketch(Plane.XZ.offset(-10.6)):
        Circle(F3_S98_R)
    extrude(amount=F3_T99_DEPTH, both=True, mode=Mode.INTERSECT)


with BuildPart() as f3_tool90_1:
    add(f3_tool90.part)

    # F3_t100: intersect F3_tool95
    add(f3_tool95.part, mode=Mode.INTERSECT)


with BuildPart() as f2_1:
    add(f2.part)

    # F3_t101: cut F3_tool1, F3_tool6, F3_tool10, F3_tool14, F3_tool18, F3_tool22, F3_tool27, F3_tool31, F3_tool35, F3_tool39, F3_tool43, F3_tool48, F3_tool54, F3_tool66, F3_tool78, F3_tool90
    add([f3_tool1.part, f3_tool6.part, f3_tool10.part, f3_tool14.part, f3_tool18.part, f3_tool22.part, f3_tool27.part, f3_tool31.part, f3_tool35.part, f3_tool39.part, f3_tool43.part, f3_tool48.part, f3_tool54_1.part, f3_tool66_1.part, f3_tool78_1.part, f3_tool90_1.part], mode=Mode.SUBTRACT)


solid = f2_1.part
